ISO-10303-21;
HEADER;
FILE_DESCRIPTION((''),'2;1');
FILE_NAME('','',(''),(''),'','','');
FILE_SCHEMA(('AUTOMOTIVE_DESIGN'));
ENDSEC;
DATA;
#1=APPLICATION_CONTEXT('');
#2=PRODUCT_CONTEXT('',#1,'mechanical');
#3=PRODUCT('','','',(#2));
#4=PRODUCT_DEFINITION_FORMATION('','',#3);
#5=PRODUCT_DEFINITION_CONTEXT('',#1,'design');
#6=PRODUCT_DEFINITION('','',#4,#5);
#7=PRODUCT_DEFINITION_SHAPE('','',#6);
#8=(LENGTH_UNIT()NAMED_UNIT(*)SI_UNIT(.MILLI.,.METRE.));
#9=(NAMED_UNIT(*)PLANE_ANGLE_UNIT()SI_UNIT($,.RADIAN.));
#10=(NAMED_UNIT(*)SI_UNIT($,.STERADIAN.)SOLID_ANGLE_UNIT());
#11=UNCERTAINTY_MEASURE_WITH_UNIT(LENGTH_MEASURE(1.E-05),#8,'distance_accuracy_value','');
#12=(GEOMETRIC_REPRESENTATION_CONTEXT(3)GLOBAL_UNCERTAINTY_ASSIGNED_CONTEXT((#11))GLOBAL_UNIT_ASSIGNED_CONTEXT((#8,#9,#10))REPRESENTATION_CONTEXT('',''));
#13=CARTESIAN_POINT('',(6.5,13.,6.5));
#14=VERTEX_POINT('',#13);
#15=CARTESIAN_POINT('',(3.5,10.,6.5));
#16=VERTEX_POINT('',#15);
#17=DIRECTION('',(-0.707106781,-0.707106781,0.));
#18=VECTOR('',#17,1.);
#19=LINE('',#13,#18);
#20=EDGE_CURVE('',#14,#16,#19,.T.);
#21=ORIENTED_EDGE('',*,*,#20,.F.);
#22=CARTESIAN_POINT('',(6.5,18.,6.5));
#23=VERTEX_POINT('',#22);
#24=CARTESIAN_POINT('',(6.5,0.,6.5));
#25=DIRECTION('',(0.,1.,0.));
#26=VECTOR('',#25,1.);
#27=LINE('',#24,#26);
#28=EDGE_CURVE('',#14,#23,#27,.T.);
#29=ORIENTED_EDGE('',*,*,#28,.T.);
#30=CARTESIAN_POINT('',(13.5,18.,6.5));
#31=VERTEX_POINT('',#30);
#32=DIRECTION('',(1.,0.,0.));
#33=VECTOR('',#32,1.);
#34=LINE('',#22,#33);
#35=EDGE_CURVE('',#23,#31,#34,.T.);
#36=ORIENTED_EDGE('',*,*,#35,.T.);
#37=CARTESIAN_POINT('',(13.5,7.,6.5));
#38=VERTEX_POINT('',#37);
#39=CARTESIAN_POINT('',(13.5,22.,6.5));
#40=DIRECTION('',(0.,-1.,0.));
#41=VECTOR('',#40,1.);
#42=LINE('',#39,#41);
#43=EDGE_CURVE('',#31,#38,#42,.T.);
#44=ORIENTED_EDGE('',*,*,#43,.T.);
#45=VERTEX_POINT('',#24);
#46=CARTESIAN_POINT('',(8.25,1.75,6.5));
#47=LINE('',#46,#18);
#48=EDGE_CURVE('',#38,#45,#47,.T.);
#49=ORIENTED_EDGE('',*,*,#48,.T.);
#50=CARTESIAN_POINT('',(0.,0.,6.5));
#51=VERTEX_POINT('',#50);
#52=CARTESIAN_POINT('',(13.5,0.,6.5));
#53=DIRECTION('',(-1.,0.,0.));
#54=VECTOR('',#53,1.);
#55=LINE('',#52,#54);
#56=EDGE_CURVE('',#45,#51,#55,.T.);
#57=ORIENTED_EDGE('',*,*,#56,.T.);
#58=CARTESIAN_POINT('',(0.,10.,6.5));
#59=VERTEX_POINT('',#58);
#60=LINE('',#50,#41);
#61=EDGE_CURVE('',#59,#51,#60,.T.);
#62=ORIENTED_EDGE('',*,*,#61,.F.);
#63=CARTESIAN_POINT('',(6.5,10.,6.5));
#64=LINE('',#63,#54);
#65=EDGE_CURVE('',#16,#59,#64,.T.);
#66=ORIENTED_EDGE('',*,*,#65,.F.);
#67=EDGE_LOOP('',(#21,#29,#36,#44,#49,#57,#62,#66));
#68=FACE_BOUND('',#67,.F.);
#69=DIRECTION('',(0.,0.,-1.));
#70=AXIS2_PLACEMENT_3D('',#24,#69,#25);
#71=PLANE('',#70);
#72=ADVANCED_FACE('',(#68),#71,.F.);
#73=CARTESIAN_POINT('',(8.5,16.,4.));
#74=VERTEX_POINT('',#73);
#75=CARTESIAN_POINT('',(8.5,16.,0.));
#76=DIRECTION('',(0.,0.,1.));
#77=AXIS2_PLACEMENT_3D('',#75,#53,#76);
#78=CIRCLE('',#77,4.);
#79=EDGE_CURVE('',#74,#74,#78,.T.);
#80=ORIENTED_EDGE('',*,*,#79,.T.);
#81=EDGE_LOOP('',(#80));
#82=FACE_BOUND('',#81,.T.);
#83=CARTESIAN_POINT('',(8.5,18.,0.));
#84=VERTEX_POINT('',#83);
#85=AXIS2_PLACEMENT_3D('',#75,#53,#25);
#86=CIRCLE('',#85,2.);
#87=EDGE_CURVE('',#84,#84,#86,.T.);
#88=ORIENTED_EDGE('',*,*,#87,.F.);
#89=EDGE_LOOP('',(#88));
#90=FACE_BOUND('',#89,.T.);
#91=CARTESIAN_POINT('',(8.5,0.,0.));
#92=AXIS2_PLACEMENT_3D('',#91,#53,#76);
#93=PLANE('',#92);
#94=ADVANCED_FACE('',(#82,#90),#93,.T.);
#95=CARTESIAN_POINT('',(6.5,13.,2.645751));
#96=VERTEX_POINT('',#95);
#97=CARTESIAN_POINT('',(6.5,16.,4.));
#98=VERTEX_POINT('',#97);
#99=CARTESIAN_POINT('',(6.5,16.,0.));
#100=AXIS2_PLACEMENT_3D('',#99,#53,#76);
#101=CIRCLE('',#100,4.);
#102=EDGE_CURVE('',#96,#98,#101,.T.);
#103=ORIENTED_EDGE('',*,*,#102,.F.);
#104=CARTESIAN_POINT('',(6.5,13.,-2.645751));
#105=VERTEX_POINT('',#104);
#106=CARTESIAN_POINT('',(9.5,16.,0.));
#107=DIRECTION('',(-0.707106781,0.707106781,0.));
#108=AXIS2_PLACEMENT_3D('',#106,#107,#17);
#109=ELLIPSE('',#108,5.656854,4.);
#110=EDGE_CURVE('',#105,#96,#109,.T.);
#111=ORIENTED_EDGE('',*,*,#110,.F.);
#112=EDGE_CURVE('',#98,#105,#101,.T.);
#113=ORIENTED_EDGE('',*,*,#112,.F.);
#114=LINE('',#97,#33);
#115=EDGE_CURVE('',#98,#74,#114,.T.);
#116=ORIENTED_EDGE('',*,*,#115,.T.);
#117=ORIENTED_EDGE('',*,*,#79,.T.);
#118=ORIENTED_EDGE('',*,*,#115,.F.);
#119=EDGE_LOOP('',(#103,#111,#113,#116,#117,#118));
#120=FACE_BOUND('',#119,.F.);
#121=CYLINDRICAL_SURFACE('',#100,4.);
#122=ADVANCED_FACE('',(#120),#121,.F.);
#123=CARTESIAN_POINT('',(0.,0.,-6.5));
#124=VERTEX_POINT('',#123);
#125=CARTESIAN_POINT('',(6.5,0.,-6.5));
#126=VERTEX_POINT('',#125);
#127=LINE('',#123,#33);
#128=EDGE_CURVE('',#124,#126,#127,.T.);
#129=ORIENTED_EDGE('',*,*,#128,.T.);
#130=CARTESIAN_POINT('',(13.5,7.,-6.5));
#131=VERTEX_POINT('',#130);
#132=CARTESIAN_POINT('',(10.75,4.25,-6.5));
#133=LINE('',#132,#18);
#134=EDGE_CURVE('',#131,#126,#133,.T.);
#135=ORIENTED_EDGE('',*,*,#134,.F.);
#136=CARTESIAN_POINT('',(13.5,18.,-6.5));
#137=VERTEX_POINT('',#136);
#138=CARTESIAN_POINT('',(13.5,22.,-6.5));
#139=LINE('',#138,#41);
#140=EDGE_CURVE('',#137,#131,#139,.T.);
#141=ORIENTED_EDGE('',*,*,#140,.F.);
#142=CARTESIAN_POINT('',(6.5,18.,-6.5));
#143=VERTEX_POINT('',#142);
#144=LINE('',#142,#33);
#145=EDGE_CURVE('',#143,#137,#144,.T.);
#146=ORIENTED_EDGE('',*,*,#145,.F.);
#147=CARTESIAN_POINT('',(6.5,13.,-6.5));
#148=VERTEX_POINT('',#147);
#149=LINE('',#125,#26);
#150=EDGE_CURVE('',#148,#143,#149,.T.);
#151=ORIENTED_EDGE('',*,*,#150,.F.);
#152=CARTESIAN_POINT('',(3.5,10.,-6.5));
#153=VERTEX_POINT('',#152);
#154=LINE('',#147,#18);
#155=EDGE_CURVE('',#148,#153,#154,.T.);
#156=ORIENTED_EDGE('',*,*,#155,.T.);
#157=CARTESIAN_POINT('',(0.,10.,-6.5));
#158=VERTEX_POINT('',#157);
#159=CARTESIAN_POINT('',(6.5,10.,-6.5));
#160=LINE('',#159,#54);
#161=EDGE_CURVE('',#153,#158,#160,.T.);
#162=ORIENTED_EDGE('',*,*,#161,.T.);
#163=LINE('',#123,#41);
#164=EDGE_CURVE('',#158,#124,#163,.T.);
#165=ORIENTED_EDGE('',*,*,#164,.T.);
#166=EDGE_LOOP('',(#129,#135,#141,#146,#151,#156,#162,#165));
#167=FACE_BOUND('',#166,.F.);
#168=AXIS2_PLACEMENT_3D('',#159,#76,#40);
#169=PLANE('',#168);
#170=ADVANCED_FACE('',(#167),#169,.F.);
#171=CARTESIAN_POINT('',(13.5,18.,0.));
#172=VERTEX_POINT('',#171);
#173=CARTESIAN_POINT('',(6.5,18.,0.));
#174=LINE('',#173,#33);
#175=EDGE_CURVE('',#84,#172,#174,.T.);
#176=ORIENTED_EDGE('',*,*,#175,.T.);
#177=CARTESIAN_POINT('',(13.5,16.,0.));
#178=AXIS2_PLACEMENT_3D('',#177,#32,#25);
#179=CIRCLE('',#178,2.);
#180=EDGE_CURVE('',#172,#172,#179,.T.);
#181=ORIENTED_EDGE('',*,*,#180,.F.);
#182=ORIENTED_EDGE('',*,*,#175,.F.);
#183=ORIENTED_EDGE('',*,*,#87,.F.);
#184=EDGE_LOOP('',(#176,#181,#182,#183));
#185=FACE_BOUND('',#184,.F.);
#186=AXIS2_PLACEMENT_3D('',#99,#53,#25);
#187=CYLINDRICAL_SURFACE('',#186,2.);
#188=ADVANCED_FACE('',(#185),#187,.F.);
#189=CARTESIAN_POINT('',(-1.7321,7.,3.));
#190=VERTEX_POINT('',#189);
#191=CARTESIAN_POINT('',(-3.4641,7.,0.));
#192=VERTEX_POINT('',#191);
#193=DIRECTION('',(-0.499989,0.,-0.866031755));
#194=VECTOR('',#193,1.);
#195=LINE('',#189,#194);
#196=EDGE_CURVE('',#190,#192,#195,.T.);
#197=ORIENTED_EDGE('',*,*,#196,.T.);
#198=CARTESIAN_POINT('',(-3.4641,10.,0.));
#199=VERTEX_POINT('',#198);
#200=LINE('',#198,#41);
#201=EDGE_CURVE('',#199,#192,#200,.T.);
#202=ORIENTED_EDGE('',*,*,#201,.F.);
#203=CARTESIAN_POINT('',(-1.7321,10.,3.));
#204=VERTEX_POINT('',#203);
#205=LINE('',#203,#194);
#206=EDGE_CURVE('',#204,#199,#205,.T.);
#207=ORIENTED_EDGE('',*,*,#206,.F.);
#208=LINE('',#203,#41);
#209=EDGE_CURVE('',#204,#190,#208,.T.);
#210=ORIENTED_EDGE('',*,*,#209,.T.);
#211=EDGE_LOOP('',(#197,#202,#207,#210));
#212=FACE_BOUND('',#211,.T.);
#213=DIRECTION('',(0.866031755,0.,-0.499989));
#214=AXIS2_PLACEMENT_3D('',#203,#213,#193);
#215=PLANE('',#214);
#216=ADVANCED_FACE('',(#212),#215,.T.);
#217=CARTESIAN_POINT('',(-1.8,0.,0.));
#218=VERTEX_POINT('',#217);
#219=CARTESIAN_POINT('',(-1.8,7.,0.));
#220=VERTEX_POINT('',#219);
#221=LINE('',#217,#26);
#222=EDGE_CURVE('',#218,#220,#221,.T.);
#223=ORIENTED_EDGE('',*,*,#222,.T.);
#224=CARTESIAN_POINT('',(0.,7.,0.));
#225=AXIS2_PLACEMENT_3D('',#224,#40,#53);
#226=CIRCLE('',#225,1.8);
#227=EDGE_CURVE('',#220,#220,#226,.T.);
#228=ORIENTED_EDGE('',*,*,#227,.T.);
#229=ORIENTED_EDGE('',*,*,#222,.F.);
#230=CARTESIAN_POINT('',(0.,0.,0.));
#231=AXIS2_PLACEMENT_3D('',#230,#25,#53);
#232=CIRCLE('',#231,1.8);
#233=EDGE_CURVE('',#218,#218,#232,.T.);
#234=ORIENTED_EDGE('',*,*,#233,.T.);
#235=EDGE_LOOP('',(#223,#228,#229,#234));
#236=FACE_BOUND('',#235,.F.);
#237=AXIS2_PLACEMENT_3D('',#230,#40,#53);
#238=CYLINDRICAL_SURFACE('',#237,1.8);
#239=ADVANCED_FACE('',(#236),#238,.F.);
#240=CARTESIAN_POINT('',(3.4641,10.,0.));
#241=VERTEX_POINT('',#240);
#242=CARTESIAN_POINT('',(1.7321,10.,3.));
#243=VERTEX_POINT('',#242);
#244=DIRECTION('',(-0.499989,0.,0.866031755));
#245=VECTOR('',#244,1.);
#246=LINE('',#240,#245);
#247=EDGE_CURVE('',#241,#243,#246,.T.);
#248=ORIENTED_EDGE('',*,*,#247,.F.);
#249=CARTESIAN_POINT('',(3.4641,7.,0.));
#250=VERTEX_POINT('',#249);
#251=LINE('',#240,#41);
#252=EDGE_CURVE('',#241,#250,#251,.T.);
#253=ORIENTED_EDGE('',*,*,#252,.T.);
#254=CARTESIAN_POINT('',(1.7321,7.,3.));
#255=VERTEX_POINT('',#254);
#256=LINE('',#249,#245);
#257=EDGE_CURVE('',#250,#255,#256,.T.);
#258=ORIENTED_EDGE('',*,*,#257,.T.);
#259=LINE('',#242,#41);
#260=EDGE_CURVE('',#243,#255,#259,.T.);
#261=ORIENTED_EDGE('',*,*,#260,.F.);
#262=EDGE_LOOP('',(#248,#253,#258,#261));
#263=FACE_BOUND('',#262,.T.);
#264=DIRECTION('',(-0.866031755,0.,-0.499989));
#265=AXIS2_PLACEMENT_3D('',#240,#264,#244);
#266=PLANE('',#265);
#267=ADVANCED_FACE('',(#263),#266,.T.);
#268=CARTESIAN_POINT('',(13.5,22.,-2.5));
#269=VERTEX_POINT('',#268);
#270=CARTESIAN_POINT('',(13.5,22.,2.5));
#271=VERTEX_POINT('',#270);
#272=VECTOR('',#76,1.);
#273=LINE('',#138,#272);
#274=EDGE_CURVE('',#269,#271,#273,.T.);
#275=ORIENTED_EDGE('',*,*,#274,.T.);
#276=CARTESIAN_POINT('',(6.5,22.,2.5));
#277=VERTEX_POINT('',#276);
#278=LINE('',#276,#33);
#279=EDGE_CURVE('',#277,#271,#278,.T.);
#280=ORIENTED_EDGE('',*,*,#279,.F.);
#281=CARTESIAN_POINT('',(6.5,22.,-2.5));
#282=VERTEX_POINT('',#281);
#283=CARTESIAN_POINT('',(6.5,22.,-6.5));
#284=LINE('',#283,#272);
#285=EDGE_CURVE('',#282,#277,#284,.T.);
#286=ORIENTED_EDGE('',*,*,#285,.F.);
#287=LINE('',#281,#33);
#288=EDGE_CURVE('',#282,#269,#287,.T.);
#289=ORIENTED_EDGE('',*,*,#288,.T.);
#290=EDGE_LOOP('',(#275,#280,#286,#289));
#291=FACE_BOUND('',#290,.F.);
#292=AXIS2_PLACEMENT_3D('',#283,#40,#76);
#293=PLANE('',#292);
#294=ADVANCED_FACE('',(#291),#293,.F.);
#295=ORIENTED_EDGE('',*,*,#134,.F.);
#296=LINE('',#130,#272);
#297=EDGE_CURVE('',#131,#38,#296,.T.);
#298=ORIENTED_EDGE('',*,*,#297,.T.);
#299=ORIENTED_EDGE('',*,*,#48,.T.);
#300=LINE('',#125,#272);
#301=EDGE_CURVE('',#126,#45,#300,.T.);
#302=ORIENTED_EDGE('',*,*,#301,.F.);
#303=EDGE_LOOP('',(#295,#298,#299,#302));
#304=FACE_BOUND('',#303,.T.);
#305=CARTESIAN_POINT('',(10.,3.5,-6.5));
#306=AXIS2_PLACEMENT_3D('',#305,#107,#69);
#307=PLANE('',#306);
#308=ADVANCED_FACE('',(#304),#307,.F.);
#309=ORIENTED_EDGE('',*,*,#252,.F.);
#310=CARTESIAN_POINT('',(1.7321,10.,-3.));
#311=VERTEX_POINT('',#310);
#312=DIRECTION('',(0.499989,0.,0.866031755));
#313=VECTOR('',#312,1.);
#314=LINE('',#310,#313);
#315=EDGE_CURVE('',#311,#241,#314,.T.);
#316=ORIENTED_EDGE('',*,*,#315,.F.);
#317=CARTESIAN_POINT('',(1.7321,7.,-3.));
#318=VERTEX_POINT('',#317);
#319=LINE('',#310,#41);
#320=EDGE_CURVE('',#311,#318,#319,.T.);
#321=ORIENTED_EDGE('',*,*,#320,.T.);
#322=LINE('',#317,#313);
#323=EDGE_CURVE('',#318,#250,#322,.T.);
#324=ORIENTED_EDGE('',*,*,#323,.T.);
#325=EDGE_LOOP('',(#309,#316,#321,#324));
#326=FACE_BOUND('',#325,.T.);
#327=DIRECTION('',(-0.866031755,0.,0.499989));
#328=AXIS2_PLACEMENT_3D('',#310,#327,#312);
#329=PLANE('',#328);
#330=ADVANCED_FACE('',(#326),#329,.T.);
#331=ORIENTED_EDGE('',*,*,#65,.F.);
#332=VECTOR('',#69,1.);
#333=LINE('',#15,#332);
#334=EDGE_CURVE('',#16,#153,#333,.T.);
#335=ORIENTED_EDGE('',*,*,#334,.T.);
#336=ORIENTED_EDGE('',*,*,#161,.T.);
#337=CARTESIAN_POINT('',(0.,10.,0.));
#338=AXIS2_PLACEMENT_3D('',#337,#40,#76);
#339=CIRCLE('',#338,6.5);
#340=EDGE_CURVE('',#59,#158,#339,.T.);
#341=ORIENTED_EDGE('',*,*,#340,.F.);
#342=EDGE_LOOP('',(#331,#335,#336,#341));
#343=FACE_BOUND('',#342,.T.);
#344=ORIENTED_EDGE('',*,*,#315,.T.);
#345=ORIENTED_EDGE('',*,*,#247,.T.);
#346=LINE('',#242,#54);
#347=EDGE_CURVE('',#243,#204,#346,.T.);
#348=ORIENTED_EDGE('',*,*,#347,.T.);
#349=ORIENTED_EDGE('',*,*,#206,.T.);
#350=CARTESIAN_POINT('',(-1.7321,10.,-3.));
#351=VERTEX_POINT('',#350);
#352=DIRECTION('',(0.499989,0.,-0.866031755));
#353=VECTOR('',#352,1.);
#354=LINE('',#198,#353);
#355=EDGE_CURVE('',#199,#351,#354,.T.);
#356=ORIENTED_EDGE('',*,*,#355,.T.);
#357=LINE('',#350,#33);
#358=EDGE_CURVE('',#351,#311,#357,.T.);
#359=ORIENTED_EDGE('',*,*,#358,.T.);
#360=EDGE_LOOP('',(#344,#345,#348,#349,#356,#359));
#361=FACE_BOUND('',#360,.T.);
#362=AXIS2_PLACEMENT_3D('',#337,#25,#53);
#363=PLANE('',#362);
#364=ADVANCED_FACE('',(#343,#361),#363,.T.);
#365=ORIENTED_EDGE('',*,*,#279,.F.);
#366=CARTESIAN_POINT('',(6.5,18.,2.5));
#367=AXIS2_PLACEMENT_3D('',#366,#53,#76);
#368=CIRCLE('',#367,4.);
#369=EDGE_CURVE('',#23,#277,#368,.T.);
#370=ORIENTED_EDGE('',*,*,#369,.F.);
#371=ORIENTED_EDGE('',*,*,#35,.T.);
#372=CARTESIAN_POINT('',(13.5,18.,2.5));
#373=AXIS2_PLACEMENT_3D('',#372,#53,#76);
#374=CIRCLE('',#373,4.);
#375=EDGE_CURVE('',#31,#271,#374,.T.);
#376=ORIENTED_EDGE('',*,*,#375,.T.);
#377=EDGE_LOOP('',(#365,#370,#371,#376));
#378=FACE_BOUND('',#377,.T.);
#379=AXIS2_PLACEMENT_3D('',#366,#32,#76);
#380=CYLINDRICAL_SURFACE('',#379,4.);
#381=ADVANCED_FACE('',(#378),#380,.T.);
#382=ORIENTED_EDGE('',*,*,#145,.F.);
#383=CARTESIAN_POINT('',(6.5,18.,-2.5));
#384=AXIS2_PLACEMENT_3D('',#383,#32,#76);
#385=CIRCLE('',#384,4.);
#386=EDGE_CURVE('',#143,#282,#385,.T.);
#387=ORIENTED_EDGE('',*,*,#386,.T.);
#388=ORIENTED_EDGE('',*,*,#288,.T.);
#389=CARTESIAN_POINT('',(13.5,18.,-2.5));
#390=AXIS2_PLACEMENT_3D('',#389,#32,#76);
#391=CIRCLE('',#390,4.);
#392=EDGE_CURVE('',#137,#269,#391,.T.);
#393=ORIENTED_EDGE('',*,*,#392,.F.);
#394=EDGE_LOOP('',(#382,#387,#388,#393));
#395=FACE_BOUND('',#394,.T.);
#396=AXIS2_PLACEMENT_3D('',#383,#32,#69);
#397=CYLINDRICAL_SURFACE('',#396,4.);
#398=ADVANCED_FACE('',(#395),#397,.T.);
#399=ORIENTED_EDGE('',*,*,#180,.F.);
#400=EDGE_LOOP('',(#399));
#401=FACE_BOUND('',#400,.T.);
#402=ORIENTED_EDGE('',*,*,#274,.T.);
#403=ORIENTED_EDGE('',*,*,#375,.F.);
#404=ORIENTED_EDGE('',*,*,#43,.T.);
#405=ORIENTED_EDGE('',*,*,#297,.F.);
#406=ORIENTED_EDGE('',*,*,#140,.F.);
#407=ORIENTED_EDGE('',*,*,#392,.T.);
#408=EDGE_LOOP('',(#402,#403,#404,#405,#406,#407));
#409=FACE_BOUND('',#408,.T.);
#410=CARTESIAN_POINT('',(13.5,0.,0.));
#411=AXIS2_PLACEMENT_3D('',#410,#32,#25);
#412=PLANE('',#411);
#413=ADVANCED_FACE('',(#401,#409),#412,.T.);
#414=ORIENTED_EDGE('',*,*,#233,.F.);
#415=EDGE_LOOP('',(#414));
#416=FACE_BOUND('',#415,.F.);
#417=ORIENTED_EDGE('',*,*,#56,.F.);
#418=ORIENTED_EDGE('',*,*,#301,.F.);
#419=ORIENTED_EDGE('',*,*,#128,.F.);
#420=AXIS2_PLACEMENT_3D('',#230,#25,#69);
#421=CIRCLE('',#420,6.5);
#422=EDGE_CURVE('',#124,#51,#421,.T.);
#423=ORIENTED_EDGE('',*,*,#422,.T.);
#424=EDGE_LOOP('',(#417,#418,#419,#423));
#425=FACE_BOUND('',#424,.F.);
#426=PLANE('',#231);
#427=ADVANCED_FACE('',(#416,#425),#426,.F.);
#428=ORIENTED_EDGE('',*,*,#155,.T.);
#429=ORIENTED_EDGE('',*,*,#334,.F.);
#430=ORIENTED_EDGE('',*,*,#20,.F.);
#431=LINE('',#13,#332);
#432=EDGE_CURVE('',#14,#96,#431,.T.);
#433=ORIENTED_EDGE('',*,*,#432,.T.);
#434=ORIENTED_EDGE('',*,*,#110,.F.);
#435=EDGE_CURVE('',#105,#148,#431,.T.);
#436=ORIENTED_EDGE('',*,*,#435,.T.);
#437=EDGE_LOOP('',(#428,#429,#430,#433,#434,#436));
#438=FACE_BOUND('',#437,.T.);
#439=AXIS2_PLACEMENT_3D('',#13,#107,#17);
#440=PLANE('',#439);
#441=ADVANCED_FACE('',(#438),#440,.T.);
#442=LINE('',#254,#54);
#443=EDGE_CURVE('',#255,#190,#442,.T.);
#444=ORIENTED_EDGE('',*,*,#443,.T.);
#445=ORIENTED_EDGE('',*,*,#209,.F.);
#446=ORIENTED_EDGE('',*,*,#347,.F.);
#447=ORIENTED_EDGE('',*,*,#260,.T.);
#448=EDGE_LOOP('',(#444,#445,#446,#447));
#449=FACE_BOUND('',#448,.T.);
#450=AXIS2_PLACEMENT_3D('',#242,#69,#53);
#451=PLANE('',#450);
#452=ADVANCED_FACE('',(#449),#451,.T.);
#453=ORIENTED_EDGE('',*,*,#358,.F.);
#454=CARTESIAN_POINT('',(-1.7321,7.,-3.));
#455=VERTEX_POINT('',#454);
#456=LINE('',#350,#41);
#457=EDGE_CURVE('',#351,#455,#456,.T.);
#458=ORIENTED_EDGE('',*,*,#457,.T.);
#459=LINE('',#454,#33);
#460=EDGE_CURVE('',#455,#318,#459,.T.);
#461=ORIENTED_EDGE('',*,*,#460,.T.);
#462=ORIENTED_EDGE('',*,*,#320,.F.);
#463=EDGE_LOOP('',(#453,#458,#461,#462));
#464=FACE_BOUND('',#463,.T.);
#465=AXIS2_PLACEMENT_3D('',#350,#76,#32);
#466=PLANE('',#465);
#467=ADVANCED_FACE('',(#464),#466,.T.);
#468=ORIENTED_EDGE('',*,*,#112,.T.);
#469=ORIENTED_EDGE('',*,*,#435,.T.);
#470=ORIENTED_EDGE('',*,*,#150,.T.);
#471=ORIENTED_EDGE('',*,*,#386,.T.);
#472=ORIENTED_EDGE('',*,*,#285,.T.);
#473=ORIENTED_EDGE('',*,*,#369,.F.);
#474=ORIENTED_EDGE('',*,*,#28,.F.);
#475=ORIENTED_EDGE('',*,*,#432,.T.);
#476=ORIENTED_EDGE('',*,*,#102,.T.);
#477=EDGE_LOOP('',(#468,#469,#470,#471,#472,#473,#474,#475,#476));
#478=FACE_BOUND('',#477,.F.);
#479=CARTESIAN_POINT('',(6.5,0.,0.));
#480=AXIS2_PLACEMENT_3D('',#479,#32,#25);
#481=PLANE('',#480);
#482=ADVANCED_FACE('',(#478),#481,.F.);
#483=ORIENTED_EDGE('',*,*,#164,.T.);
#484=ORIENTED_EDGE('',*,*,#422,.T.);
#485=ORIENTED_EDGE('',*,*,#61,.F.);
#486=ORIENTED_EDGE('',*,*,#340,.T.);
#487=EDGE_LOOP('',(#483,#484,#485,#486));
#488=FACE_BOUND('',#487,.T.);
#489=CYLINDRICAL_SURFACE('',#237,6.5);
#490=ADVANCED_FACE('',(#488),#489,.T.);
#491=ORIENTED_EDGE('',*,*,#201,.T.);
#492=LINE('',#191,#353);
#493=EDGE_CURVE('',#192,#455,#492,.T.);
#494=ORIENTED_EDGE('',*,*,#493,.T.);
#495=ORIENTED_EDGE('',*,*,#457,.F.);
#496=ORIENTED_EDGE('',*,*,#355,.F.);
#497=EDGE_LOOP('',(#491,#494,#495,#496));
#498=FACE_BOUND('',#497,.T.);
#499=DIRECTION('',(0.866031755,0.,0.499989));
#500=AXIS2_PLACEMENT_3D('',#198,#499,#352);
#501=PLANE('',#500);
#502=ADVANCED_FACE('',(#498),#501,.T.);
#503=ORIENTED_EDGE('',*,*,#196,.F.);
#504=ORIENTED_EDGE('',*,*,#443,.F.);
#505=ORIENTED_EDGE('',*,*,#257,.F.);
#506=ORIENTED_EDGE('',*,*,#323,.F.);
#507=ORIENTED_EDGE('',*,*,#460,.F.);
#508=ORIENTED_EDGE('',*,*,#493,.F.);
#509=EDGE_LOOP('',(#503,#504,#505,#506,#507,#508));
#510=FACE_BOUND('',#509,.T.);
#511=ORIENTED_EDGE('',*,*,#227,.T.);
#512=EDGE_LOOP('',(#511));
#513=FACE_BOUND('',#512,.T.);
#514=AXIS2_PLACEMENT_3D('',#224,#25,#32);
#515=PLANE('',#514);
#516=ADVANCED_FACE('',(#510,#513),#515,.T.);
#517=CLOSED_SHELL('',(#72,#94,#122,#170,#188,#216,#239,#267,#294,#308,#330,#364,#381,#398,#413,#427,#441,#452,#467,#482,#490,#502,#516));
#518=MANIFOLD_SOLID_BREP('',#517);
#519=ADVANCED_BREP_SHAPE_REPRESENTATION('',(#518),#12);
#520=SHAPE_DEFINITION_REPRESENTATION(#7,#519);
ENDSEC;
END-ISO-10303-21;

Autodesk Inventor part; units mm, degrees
ref_plane "XZ Plane" through (0, 0, 0) normal (0, 1, 0) x (-1, 0, 0)
ref_plane "XY Plane" through (0, 0, 0) normal (0, 0, 1) x (1, 0, 0)
sketch "Sketch1" plane through (0, 0, 0) normal (0, 1, 0) x (-1, 0, 0)
  circle A0 centre (0, 0) radius 6.5
  circle A1 centre (0, 0) radius 1.8
  dimension "d0" = 13
  dimension "d1" = 3.6
extrude "Extrusion1" add sketch "Sketch1" along normal blind 10
sketch "Sketch2" plane through (0, 10, 0) normal (0, 1, 0) x (1, 0, 0)
  point P0 (0, 0)
ref_plane "Work Plane1" through (6.5, 0, 0) normal (1, 0, 0) x (0, 1, 0)
sketch "Sketch3" plane through (6.5, 0, 0) normal (1, 0, 0) x (0, 1, 0)
  line L0 (10, -6.5) -> (10, 6.5) projected
  line L1 (10, -6.5) -> (22, -6.5)
  line L2 (22, -6.5) -> (22, 6.5)
  line L3 (22, 6.5) -> (10, 6.5)
  line L4 (10, 6.5) -> (10, -6.5)
  line L5 (0, -6.5) -> (0, 6.5) projected
  line L6 (10, -6.5) -> (0, -6.5)
  line L7 (0, -6.5) -> (0, 6.5)
  line L8 (0, 6.5) -> (10, 6.5)
  line L9 (10, 6.5) -> (10, -6.5)
  circle A0 centre (16, 0) radius 2
  point P0 (0, 0)
  point P1 (0, -6.5)
  point P2 (10, 6.5)
  point P3 (10, 6.5)
  dimension "d5" = 12
  dimension "d6" = 4
  dimension "d11" = 6
extrude "Extrusion2" add sketch "Sketch3" against normal up to surface contours L6 L5 L8 L0
extrude "Extrusion3" add sketch "Sketch3" along normal blind 7
sketch "Sketch5" plane through (0, 10, 0) normal (0, 1, 0) x (1, 0, 0)
  line L0 (3.4641, 0) -> (1.7321, -3)
  line L1 (1.7321, -3) -> (-1.7321, -3)
  line L2 (-1.7321, -3) -> (-3.4641, 0)
  line L3 (-3.4641, 0) -> (-1.7321, 3)
  line L4 (-1.7321, 3) -> (1.7321, 3)
  line L5 (1.7321, 3) -> (3.4641, 0)
  point P0 (0, 0)
  point P1 (0, 0)
  dimension "d12" = 6
extrude "Extrusion4" cut sketch "Sketch5" against normal blind 3
fillet "Fillet1" radius 4 2 edges at (10, 22, 6.5) (10, 22, -6.5)
sketch "Sketch6" plane through (6.5, 0, 0) normal (-1, 0, 0) x (0, 0, 1)
  circle A0 centre (0, 16) radius 2 projected
  circle A1 centre (0, 16) radius 4
  point P0 (0, 0)
  dimension "d16" = 8
extrude "Extrusion5" cut sketch "Sketch6" against normal blind 2
chamfer "Chamfer1" distance 7 angle 45 1 edges at (13.5, 0, 0)
chamfer "Chamfer2" distance 3 angle 45 1 edges at (6.5, 10, 0)
properties part number "SpringConn"
